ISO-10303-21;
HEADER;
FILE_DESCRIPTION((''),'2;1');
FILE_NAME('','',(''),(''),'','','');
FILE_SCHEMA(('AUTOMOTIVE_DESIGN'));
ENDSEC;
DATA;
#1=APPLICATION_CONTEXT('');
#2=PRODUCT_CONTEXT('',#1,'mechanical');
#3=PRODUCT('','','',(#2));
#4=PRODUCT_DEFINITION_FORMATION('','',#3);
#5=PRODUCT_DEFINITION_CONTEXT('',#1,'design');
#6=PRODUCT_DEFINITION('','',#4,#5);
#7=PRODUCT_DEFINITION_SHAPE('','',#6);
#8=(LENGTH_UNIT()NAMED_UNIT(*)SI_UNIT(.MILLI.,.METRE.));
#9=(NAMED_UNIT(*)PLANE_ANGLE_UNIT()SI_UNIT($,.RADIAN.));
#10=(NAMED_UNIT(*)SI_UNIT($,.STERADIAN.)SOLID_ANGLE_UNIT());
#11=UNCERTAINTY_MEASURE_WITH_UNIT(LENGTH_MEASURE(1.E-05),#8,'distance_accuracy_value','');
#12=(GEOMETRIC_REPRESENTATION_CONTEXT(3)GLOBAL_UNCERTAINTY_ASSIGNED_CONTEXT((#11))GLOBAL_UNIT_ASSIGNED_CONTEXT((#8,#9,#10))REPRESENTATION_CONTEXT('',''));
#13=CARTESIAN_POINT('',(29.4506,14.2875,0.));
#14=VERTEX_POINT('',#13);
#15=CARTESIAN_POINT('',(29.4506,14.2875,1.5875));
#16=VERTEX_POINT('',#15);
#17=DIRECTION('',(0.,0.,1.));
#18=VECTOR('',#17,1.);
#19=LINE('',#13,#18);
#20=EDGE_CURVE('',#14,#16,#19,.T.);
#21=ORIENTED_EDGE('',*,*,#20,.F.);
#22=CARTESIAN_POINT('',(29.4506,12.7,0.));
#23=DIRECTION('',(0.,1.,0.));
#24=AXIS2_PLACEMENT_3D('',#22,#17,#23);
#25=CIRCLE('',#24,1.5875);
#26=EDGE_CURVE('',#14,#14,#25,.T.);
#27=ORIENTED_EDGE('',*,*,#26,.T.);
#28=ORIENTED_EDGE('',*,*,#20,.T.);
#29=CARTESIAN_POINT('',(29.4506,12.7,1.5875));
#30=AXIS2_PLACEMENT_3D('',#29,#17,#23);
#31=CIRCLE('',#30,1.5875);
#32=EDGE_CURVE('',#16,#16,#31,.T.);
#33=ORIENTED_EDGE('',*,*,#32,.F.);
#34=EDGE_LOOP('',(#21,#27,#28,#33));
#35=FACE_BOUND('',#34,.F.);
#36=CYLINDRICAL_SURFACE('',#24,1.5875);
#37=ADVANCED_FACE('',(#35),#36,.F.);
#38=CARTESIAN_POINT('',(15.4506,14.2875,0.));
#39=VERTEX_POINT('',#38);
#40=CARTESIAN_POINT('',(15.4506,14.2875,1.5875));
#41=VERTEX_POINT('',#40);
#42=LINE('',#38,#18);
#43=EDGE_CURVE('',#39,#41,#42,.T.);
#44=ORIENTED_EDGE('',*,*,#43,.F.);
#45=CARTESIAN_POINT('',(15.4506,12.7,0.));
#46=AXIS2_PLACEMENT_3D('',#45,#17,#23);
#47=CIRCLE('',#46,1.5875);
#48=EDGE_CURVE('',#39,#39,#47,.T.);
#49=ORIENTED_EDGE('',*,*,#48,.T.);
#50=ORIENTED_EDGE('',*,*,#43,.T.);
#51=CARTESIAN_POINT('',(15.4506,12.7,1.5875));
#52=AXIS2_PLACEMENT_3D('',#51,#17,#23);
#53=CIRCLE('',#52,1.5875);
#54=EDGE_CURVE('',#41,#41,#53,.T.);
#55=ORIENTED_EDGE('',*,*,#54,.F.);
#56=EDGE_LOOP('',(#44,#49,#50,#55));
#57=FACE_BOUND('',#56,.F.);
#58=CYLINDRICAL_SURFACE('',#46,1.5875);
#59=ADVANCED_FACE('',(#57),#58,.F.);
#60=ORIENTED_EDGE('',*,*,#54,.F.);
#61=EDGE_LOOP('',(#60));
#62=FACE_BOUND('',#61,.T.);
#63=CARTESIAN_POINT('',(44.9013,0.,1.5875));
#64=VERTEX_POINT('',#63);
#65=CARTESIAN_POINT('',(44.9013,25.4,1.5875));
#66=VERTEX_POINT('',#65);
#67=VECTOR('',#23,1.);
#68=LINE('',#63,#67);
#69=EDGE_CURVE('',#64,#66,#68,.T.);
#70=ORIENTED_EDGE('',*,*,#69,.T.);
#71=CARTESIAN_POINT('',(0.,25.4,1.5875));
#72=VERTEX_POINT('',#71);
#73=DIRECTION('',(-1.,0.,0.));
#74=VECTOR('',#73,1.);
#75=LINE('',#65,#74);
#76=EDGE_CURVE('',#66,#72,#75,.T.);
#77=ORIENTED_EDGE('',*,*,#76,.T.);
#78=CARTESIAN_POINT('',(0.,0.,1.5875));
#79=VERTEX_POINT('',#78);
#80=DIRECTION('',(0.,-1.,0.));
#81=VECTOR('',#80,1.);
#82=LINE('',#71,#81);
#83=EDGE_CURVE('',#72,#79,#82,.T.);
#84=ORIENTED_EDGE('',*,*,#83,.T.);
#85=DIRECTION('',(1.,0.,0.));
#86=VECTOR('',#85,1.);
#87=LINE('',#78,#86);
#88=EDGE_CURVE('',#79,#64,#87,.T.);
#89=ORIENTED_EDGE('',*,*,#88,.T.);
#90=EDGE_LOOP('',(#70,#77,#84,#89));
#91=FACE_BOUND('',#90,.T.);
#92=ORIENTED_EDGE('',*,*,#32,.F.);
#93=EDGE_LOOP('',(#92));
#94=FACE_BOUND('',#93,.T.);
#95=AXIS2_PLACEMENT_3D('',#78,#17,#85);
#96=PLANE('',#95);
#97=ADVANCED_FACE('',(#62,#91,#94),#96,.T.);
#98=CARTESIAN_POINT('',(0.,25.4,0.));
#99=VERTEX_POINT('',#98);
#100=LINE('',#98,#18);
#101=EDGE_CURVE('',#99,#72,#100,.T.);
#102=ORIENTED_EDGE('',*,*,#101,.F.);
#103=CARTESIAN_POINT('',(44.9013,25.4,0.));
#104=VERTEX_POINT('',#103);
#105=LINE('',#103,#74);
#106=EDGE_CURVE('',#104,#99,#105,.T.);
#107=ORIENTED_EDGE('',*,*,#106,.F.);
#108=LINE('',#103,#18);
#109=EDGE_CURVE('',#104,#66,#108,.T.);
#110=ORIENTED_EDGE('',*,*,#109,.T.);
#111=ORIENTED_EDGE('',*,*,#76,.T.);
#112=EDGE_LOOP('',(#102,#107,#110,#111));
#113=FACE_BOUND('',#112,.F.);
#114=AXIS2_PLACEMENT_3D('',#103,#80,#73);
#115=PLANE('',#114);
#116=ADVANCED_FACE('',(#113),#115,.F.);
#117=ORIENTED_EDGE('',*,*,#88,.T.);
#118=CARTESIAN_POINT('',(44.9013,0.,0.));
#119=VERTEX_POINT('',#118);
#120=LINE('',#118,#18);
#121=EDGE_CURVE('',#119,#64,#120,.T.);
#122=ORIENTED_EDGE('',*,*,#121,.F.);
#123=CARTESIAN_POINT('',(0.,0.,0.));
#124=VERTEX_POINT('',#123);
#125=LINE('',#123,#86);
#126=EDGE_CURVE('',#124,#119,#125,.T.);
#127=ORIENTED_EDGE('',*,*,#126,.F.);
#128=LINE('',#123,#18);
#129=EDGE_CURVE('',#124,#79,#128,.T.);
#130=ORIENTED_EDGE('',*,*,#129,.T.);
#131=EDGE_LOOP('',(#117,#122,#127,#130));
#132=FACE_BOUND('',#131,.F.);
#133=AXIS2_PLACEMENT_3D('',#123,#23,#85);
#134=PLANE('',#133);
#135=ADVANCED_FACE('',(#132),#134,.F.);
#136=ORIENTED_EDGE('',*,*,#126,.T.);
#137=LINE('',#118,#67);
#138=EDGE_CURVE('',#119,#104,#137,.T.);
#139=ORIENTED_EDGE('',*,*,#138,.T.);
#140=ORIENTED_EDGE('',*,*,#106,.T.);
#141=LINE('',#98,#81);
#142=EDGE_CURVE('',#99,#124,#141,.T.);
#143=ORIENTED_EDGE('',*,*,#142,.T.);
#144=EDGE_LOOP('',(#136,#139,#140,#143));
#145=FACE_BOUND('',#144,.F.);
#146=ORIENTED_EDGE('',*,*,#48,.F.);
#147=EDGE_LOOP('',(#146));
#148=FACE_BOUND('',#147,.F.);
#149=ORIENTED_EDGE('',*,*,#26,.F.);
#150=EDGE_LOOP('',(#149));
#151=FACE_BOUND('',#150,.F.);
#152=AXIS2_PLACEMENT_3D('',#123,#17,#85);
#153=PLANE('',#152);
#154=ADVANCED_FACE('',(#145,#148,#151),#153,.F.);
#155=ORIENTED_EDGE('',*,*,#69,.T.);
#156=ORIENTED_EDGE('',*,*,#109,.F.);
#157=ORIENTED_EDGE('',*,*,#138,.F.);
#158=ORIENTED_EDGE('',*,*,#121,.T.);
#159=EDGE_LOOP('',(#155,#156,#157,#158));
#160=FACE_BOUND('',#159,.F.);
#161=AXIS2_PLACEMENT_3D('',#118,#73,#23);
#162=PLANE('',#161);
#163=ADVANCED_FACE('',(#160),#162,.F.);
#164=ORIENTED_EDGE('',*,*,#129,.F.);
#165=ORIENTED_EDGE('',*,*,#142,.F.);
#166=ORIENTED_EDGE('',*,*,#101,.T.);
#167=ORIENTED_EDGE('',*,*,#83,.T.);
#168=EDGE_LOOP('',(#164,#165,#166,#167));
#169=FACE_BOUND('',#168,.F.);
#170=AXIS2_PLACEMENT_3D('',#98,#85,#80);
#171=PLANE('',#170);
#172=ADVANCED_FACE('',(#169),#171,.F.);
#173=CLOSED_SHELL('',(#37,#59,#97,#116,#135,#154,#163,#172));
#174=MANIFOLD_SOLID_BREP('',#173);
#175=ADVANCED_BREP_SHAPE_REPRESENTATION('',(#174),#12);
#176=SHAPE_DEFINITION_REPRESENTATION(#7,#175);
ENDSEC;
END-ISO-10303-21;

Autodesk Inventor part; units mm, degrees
ref_plane "YZ Plane" through (0, 0, 0) normal (1, 0, 0) x (0, 1, 0)
ref_plane "XZ Plane" through (0, 0, 0) normal (0, 1, 0) x (-1, 0, 0)
ref_plane "XY Plane" through (0, 0, 0) normal (0, 0, 1) x (1, 0, 0)
sketch "Sketch1" plane through (0, 0, 0) normal (0, 0, 1) x (1, 0, 0)
  line L0 (0, 0) -> (44.9013, 0)
  line L1 (44.9013, 0) -> (44.9013, 25.4)
  line L2 (44.9013, 25.4) -> (0, 25.4)
  line L3 (0, 25.4) -> (0, 0)
  line L4 (0, 12.7) -> (44.9013, 12.7) construction
  point P0 (15.4506, 12.7)
  point P1 (29.4506, 12.7)
  dimension "d0" = 44.9013
  dimension "d1" = 25.4
  dimension "d3" = 14
  dimension "d4" = 15.4506
  dimension "d5" = 15.4506
extrude "Plate1" add sketch "Sketch1" along normal blind 1.5875
hole "Hole1" at (15.4506, 12.7, 0) at (29.4506, 12.7, 0) direction (0, 0, 1) diameter 3.175 end through all
equation "\"d4\" = d5"
equation "\"d11\" = Thickness"
equation "\"BendRadius\" = Thickness"
equation "\"BendReliefWidth\" = Thickness"
equation "\"BendReliefDepth\" = 0.5 * Thickness"
equation "\"CornerReliefSize\" = 4 * Thickness"
equation "\"MinimumRemnant\" = 2 * Thickness"
equation "\"TransitionRadius\" = BendRadius"
equation "\"JacobiRadiusSize\" = BendRadius"
equation "\"GapSize\" = Thickness"
equation "\"d2\" = BendRadius"
equation "\"Thickness\" = 1.5875"
properties part number "Bumper Rail Stand Top Cap"
